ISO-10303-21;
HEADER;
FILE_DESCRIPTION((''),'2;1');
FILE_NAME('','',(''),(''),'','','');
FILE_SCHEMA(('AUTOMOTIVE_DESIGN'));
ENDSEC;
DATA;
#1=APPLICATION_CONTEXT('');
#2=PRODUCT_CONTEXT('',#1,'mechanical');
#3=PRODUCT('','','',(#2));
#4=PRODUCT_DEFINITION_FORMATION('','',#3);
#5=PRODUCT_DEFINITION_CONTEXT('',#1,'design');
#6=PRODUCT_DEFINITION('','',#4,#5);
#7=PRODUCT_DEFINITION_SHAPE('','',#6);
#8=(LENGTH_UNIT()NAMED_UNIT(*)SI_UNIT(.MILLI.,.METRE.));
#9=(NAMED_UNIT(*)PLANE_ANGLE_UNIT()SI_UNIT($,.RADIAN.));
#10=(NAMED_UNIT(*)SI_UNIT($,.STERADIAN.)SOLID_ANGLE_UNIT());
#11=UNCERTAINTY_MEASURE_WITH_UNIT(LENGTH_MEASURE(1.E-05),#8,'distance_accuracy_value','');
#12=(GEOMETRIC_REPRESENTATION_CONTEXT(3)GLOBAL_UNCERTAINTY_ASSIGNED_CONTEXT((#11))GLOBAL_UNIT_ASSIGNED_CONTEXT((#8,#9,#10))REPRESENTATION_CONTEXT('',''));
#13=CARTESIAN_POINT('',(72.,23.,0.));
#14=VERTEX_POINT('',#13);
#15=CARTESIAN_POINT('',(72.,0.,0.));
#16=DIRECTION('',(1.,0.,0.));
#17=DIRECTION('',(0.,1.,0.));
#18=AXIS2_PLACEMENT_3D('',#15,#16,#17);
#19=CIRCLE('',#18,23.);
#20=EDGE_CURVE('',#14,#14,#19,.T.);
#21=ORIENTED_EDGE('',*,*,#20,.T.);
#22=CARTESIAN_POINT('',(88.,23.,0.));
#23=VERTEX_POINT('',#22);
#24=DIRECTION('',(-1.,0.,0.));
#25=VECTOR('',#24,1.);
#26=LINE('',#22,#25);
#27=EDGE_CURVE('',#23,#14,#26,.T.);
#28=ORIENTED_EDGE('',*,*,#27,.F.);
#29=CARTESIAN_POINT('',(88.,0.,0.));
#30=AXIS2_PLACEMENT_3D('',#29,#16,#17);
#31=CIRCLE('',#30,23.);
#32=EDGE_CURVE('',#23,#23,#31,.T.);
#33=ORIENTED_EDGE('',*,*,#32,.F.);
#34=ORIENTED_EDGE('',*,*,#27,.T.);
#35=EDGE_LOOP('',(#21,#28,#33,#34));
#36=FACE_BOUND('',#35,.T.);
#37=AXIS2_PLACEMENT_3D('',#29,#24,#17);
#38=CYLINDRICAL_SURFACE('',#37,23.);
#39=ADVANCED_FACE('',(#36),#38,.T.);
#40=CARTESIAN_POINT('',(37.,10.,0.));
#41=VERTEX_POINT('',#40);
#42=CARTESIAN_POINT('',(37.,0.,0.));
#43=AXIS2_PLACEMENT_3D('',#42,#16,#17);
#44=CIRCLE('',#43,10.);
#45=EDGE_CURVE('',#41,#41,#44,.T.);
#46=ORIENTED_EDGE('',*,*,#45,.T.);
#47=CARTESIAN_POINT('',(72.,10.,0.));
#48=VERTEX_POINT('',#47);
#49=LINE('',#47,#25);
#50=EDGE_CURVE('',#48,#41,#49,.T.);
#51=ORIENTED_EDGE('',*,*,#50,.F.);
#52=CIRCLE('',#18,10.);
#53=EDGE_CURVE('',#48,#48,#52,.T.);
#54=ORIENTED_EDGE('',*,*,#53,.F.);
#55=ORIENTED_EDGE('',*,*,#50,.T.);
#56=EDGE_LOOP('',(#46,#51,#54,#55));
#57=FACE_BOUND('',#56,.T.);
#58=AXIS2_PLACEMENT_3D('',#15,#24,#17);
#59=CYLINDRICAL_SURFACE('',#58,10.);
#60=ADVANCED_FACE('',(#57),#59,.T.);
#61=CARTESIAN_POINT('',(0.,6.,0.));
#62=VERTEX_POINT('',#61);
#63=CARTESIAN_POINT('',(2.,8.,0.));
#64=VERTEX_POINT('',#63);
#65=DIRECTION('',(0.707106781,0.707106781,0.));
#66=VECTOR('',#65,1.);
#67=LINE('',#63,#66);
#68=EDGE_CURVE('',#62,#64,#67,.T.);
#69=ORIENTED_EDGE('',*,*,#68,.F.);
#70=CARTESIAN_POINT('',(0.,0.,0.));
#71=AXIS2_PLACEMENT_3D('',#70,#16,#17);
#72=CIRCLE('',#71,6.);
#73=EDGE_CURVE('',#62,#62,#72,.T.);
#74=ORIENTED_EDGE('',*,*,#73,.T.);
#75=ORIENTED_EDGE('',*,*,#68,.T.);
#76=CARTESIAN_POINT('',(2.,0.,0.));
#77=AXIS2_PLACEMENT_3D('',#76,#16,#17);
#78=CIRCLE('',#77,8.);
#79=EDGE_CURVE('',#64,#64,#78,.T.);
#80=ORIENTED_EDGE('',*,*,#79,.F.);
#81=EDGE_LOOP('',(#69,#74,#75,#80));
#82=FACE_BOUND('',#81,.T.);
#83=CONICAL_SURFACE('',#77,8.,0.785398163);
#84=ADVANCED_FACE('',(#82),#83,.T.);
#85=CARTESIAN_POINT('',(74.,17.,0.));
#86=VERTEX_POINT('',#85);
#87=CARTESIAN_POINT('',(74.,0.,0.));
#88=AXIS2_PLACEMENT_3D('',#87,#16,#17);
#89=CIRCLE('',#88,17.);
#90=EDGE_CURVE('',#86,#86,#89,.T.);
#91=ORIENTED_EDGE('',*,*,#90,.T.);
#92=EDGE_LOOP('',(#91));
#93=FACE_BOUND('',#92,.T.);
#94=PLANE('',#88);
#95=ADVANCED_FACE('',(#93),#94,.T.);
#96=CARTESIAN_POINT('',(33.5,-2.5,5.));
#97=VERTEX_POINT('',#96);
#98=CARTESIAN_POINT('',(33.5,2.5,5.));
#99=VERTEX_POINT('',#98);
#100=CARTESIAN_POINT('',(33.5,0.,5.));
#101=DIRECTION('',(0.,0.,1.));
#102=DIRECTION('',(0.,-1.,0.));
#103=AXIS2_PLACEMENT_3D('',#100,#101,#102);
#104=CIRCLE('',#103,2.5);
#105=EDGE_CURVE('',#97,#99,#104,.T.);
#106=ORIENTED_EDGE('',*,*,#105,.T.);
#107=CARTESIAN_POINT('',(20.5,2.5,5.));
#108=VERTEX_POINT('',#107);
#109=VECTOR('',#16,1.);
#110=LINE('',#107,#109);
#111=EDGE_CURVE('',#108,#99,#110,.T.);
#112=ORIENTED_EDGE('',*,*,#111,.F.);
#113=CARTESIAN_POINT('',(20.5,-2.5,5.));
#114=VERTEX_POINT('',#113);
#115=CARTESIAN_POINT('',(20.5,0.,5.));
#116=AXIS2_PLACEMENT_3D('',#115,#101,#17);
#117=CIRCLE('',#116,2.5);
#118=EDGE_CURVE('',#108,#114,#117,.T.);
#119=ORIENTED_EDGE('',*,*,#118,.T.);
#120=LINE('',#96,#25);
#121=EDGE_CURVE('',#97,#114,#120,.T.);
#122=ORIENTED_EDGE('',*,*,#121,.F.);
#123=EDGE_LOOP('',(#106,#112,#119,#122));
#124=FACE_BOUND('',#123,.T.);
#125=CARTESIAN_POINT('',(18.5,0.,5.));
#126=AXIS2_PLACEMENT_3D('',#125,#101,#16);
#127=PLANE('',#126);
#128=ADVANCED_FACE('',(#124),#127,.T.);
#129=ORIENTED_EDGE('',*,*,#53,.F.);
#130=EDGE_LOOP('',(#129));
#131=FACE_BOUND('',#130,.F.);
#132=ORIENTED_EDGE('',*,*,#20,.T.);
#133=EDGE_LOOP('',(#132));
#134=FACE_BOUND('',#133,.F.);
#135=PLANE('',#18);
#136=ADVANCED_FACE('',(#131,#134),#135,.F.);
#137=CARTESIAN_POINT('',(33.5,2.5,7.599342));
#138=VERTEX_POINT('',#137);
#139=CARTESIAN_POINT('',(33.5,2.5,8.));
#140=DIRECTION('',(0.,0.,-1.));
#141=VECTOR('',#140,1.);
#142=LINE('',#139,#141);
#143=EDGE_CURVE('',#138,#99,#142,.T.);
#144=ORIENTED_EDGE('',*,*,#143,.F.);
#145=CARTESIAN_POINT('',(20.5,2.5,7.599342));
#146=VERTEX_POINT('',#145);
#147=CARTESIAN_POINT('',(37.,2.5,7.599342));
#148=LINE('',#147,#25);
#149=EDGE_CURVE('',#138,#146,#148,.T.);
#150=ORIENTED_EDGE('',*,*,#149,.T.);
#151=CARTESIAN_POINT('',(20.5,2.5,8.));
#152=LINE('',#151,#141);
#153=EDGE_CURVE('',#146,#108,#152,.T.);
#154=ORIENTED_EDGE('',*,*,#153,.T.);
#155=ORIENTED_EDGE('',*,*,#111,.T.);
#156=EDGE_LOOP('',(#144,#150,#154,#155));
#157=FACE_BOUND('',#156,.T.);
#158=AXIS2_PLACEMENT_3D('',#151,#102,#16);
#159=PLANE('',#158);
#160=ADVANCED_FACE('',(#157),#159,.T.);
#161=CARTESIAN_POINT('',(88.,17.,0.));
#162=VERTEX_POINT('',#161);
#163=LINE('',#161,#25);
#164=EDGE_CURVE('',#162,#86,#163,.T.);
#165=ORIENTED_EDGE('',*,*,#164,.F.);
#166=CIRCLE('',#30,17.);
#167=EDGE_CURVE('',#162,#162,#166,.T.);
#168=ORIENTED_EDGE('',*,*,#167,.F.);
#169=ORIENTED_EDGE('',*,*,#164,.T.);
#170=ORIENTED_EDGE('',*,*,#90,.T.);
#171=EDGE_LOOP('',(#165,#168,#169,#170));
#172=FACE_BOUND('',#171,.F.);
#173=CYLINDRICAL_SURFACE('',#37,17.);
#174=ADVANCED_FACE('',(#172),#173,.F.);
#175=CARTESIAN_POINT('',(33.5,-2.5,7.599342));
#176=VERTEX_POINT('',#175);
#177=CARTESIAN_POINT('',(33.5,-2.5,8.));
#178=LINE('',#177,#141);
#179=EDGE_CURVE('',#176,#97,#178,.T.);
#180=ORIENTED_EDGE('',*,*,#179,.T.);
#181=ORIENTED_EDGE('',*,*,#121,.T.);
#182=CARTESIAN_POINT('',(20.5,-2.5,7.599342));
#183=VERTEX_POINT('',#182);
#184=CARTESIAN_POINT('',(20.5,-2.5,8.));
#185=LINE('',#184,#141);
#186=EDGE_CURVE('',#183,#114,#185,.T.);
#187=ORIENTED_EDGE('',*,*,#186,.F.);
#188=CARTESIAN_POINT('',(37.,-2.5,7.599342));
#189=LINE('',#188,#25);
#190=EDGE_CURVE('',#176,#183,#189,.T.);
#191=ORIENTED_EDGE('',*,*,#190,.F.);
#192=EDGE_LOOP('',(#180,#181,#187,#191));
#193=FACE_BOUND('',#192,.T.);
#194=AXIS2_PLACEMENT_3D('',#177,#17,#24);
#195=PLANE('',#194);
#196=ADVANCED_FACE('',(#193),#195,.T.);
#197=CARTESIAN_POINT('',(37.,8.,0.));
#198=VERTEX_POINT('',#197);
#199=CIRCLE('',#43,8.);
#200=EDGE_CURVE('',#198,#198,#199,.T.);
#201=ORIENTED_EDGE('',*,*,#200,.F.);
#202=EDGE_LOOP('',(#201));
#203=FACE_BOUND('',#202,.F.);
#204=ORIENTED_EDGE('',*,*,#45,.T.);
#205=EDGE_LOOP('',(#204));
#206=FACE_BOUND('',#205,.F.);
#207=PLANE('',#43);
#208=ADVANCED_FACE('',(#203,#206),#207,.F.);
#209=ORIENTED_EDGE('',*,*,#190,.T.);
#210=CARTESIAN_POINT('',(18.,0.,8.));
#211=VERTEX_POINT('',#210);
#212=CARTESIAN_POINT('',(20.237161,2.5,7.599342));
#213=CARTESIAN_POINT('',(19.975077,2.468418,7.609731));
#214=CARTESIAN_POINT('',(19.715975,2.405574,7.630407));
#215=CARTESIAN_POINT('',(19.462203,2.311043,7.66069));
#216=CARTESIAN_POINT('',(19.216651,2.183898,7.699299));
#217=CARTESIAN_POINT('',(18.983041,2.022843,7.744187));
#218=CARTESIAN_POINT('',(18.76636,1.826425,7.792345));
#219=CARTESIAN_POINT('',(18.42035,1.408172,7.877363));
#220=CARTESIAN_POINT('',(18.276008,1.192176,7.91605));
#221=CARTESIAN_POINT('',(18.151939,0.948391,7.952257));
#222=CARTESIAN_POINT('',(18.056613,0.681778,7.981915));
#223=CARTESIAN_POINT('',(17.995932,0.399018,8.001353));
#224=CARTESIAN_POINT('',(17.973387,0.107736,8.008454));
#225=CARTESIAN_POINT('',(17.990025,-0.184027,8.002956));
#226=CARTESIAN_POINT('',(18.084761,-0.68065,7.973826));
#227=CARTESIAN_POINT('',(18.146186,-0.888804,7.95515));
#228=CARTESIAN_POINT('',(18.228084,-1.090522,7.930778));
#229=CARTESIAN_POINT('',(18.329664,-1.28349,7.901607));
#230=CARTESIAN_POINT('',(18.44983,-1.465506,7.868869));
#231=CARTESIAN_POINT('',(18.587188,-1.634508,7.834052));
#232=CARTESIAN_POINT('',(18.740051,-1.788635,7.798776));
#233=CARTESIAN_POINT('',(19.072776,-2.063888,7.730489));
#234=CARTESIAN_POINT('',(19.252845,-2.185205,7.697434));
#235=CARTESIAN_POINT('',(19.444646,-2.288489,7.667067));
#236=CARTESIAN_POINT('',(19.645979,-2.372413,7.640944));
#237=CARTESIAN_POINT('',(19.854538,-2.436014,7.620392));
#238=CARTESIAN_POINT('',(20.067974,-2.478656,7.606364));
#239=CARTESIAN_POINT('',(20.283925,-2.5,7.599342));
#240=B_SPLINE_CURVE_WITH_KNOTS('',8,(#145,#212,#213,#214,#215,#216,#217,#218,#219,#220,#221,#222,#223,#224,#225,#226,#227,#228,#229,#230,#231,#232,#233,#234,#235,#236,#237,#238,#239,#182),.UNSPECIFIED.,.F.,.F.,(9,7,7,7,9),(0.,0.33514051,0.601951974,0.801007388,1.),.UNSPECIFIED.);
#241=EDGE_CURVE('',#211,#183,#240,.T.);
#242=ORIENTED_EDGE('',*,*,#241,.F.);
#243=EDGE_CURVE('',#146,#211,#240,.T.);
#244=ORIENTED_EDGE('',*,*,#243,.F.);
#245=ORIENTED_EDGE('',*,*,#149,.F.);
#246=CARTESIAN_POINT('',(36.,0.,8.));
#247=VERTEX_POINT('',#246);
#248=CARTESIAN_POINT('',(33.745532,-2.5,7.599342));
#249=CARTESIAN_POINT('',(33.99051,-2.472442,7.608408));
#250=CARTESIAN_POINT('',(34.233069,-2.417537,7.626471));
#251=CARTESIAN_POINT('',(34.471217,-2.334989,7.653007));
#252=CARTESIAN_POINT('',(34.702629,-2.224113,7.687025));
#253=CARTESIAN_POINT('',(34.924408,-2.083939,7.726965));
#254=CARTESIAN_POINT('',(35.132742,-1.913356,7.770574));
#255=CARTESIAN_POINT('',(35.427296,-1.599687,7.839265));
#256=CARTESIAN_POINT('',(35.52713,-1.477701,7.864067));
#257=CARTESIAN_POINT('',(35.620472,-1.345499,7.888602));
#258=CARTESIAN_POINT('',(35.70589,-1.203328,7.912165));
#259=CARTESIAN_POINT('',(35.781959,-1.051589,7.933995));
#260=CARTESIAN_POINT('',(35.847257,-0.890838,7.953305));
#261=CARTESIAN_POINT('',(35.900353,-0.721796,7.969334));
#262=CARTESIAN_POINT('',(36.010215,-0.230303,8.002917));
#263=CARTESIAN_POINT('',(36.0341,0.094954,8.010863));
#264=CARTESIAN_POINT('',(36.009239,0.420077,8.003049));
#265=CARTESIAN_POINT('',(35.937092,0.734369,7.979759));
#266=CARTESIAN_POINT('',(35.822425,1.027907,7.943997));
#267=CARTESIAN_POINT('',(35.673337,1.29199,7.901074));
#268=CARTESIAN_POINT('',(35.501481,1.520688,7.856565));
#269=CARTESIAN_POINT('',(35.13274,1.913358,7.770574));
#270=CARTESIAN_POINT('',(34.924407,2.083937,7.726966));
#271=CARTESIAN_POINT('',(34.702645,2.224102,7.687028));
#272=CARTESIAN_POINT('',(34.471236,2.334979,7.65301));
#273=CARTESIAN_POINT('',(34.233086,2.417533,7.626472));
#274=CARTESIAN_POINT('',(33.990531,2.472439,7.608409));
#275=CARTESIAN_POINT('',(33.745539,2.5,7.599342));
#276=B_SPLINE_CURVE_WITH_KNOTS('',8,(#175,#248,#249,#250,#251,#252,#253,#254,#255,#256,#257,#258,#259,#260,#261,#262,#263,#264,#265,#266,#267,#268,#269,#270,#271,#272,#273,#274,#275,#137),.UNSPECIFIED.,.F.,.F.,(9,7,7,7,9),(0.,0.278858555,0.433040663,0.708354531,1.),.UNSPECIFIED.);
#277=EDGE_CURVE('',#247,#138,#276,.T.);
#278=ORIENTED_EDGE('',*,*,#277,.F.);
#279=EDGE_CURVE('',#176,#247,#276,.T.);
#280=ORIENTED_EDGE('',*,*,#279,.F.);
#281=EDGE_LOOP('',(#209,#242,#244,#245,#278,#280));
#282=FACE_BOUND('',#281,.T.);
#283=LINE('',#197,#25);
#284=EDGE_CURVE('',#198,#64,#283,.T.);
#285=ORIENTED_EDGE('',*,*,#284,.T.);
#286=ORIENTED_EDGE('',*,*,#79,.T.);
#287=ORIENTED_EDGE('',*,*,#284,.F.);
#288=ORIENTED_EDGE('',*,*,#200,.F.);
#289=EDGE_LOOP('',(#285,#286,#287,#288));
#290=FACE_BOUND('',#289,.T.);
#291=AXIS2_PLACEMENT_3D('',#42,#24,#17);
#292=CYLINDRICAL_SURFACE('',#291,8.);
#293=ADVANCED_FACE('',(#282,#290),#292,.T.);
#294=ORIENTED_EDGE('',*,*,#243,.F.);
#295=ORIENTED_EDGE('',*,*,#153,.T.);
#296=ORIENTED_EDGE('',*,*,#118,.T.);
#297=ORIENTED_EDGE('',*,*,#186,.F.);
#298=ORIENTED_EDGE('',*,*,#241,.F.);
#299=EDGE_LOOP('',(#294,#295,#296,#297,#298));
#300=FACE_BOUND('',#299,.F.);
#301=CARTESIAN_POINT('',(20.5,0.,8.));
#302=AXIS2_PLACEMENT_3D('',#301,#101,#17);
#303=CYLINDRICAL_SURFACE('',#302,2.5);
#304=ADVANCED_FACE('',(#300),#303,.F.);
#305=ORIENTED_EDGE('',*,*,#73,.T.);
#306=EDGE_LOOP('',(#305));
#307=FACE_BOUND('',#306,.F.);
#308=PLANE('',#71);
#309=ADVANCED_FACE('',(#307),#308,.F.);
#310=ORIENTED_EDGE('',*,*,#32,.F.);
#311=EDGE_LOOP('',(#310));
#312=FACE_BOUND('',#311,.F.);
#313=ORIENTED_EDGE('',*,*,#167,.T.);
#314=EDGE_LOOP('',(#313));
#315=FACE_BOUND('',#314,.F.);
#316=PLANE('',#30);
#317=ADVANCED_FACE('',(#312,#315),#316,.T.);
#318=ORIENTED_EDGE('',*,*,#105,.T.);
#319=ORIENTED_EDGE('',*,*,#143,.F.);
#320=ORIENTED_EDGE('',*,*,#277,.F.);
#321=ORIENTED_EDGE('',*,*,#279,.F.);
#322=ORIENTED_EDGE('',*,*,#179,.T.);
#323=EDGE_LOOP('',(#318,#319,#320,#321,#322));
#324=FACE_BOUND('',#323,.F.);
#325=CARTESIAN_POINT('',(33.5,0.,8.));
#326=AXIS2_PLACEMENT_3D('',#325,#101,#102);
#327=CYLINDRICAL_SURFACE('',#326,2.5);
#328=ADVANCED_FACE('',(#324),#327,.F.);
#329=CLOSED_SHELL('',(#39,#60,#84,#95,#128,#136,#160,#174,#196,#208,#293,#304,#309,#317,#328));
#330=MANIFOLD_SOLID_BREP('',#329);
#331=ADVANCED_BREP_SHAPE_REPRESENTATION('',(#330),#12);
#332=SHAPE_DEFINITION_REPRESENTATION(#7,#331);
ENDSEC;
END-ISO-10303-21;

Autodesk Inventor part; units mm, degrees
ref_plane "YZ Plane" through (0, 0, 0) normal (1, 0, 0) x (0, 1, 0)
ref_plane "XZ Plane" through (0, 0, 0) normal (0, 1, 0) x (-1, 0, 0)
sketch "Sketch1" plane through (0, 0, 0) normal (0, 0, 1) x (1, 0, 0)
  line L0 (0, 0) -> (88, 0)
  line L1 (88, 0) -> (88, 23)
  line L2 (88, 23) -> (72, 23)
  line L3 (72, 23) -> (72, 10)
  line L4 (72, 10) -> (37, 10)
  line L5 (37, 10) -> (37, 8)
  line L6 (37, 8) -> (0, 8)
  line L7 (0, 8) -> (0, 0)
  line L8 (88, 17) -> (74, 17)
  line L9 (74, 17) -> (74, 0)
  dimension "d0" = 88
  dimension "d1" = 16
  dimension "d2" = 35
  dimension "d3" = 2
  dimension "d4" = 46
  dimension "d5" = 6
  dimension "d6" = 20
  dimension "d7" = 16
revolve "Revolution1" add sketch "Sketch1" angle 360 about axis through (0, 0, 0) along (1, 0, 0) contours L7 L6 L5 L4 L3 L2 L1 L8 L9 L0
thread "Thread1" size "M16x2" class "6g" standard "ISO Metric profile" length 16
ref_plane "Work Plane1" through (18.5, 0, 8) normal (0, 0, 1) x (1, 0, 0)
sketch "Sketch2" plane through (18.5, 0, 8) normal (0, 0, 1) x (1, 0, 0)
  line L0 (-36.1, 0) -> (87.1, 0) construction
  line L1 (17.5, 0) -> (-0.5, 0) construction
  line L2 (15, -2.5) -> (2, -2.5)
  line L3 (2, 2.5) -> (15, 2.5)
  arc A0 (15, -2.5) -> (15, 2.5) centre (15, 0) ccw
  arc A1 (2, 2.5) -> (2, -2.5) centre (2, 0) ccw
  line L4 (18.5, -10) -> (18.5, 10) projected
  point P0 (-18.5, 0)
  point P1 (8.5, 0)
  point P2 (17.5, 0)
  point P3 (-0.5, 0)
  dimension "d11" = 5
  dimension "d12" = 18
  dimension "d13" = 1
extrude "Extrusion1" cut sketch "Sketch2" against normal blind 3
chamfer "Chamfer1" distance 2 angle 45 1 edges at (0, -8, 0)
properties material "Steel, Alloy"
